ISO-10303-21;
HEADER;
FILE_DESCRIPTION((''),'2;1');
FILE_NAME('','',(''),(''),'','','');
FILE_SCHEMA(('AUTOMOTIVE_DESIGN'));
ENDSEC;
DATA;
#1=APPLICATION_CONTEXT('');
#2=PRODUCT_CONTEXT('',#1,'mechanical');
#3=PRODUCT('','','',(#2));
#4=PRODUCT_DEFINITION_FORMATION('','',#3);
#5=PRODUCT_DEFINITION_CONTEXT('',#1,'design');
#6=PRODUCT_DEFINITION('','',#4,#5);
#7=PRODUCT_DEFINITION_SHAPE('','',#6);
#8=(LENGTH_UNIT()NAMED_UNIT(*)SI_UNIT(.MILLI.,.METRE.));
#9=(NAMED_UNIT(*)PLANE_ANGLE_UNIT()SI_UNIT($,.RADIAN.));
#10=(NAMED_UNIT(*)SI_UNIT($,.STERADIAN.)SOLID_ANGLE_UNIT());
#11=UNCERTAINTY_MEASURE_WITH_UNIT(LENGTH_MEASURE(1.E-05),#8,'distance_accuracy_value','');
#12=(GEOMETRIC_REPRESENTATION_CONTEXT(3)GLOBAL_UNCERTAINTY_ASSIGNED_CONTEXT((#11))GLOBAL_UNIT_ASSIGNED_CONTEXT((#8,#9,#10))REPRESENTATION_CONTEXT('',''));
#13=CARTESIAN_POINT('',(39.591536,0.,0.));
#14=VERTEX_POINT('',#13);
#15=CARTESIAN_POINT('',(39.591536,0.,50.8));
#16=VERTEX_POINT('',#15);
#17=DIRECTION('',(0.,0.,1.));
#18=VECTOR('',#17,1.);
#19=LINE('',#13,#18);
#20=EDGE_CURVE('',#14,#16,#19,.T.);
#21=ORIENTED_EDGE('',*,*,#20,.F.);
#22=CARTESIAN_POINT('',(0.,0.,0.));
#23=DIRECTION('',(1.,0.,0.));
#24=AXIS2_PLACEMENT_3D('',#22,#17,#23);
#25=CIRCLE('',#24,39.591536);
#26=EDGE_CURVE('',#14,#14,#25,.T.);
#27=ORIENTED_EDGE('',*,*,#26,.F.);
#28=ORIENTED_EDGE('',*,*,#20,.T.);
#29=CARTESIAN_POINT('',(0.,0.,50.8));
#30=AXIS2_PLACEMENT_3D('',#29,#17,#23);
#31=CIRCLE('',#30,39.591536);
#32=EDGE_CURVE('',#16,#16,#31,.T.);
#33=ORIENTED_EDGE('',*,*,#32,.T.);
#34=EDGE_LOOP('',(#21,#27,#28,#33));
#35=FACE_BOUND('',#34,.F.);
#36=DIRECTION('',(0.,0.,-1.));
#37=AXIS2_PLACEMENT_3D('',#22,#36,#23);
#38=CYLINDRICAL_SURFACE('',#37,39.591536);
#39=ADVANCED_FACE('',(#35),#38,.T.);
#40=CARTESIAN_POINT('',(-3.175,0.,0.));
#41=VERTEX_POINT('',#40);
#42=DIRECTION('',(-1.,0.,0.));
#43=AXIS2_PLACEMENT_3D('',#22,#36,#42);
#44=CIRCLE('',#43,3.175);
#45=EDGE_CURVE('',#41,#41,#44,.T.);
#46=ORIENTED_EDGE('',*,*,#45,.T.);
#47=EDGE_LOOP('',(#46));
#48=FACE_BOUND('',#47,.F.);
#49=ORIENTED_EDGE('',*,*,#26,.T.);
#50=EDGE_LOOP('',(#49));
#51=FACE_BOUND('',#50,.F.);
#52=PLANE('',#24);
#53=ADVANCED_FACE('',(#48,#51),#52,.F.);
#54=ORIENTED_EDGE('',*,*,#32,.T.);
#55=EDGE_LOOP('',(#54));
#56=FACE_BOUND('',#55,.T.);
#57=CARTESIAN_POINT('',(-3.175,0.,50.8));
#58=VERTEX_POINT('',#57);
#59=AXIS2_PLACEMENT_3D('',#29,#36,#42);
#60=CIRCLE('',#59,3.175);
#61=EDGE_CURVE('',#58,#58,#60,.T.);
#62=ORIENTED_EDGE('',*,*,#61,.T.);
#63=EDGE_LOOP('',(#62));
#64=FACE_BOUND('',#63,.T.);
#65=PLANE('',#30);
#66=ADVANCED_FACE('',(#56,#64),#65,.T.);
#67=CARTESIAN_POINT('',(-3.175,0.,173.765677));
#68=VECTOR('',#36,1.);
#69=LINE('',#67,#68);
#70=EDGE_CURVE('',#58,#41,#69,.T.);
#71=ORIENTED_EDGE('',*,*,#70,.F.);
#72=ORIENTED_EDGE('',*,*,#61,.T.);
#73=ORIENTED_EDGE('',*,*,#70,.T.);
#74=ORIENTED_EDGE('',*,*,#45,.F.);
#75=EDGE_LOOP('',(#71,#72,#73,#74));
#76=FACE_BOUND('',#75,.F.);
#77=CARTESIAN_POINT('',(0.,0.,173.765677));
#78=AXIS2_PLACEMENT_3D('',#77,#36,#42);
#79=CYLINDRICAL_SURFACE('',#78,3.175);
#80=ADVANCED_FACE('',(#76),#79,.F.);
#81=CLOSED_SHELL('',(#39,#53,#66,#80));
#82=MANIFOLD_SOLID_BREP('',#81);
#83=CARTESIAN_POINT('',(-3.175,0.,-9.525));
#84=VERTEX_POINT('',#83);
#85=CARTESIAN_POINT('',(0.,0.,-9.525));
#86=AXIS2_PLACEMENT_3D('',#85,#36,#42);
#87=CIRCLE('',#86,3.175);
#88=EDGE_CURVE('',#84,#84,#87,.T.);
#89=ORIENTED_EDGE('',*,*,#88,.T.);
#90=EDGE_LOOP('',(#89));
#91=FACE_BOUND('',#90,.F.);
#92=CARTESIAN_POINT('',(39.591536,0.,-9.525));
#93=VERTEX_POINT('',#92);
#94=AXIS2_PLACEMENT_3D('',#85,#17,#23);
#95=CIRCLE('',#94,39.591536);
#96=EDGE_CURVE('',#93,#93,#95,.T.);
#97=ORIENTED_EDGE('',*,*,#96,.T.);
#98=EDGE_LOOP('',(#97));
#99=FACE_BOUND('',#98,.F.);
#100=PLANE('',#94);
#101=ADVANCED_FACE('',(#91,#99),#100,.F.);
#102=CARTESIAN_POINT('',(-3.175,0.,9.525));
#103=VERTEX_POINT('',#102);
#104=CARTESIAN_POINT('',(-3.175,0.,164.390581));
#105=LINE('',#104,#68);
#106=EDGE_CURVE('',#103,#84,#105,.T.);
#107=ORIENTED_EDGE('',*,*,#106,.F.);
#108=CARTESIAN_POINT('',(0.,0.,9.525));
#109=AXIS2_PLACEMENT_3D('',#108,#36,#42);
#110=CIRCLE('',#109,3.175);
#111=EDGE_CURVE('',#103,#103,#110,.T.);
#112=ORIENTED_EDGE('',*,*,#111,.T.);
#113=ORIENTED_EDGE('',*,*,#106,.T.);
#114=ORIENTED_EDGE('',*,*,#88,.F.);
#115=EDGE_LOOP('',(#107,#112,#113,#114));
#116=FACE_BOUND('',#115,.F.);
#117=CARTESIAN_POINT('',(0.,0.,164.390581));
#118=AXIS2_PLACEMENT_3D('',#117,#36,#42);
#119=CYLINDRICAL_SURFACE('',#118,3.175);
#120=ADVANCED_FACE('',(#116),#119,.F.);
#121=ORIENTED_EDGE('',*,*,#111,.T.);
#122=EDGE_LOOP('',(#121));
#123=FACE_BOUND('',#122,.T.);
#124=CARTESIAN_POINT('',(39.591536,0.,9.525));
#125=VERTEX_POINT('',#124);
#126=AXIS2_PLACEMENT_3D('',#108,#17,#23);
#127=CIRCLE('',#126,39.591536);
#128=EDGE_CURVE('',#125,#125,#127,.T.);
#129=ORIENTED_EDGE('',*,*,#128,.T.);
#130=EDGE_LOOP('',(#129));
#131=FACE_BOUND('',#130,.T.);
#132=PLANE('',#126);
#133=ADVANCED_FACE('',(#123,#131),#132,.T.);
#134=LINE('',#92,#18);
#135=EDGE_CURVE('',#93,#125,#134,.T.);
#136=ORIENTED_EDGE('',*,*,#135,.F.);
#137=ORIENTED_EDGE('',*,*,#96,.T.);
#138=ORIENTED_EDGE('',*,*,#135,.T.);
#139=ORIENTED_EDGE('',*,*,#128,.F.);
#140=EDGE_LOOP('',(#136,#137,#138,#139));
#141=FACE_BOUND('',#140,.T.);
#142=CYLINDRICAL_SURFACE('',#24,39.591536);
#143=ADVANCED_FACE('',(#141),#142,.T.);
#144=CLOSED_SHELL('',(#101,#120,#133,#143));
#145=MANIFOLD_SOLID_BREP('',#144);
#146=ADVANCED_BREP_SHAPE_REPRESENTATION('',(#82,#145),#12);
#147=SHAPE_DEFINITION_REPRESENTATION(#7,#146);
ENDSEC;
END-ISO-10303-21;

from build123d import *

# Parameters (mm, degrees)
F0_R     = 39.5915357934
F1_DEPTH = 9.525
F2_DEPTH = 50.8
F4_D     = 6.35
F4_2_D   = 6.35


# Not quite as in the source:
# - a feature names something its author has since deleted; it is built from what else it names


with BuildPart() as f1:
    # F0 (on Top) → F1 (new body, symmetric)
    with BuildSketch(Plane.XY):
        Circle(F0_R)
    extrude(amount=F1_DEPTH, both=True)

    # F4 (through all)
    with Locations(Plane.XY.offset(50.8)):
        with Locations((0, 0)):
            Hole(F4_D / 2)


with BuildPart() as f2:
    # F0 (on Top) → F2 (new body)
    with BuildSketch(Plane.XY):
        Circle(F0_R)
    extrude(amount=F2_DEPTH)

    # F4#2 (through all)
    with Locations(Plane.XY.offset(50.8)):
        with Locations((0, 0)):
            Hole(F4_2_D / 2)


solid = Compound([f1.part, f2.part])
